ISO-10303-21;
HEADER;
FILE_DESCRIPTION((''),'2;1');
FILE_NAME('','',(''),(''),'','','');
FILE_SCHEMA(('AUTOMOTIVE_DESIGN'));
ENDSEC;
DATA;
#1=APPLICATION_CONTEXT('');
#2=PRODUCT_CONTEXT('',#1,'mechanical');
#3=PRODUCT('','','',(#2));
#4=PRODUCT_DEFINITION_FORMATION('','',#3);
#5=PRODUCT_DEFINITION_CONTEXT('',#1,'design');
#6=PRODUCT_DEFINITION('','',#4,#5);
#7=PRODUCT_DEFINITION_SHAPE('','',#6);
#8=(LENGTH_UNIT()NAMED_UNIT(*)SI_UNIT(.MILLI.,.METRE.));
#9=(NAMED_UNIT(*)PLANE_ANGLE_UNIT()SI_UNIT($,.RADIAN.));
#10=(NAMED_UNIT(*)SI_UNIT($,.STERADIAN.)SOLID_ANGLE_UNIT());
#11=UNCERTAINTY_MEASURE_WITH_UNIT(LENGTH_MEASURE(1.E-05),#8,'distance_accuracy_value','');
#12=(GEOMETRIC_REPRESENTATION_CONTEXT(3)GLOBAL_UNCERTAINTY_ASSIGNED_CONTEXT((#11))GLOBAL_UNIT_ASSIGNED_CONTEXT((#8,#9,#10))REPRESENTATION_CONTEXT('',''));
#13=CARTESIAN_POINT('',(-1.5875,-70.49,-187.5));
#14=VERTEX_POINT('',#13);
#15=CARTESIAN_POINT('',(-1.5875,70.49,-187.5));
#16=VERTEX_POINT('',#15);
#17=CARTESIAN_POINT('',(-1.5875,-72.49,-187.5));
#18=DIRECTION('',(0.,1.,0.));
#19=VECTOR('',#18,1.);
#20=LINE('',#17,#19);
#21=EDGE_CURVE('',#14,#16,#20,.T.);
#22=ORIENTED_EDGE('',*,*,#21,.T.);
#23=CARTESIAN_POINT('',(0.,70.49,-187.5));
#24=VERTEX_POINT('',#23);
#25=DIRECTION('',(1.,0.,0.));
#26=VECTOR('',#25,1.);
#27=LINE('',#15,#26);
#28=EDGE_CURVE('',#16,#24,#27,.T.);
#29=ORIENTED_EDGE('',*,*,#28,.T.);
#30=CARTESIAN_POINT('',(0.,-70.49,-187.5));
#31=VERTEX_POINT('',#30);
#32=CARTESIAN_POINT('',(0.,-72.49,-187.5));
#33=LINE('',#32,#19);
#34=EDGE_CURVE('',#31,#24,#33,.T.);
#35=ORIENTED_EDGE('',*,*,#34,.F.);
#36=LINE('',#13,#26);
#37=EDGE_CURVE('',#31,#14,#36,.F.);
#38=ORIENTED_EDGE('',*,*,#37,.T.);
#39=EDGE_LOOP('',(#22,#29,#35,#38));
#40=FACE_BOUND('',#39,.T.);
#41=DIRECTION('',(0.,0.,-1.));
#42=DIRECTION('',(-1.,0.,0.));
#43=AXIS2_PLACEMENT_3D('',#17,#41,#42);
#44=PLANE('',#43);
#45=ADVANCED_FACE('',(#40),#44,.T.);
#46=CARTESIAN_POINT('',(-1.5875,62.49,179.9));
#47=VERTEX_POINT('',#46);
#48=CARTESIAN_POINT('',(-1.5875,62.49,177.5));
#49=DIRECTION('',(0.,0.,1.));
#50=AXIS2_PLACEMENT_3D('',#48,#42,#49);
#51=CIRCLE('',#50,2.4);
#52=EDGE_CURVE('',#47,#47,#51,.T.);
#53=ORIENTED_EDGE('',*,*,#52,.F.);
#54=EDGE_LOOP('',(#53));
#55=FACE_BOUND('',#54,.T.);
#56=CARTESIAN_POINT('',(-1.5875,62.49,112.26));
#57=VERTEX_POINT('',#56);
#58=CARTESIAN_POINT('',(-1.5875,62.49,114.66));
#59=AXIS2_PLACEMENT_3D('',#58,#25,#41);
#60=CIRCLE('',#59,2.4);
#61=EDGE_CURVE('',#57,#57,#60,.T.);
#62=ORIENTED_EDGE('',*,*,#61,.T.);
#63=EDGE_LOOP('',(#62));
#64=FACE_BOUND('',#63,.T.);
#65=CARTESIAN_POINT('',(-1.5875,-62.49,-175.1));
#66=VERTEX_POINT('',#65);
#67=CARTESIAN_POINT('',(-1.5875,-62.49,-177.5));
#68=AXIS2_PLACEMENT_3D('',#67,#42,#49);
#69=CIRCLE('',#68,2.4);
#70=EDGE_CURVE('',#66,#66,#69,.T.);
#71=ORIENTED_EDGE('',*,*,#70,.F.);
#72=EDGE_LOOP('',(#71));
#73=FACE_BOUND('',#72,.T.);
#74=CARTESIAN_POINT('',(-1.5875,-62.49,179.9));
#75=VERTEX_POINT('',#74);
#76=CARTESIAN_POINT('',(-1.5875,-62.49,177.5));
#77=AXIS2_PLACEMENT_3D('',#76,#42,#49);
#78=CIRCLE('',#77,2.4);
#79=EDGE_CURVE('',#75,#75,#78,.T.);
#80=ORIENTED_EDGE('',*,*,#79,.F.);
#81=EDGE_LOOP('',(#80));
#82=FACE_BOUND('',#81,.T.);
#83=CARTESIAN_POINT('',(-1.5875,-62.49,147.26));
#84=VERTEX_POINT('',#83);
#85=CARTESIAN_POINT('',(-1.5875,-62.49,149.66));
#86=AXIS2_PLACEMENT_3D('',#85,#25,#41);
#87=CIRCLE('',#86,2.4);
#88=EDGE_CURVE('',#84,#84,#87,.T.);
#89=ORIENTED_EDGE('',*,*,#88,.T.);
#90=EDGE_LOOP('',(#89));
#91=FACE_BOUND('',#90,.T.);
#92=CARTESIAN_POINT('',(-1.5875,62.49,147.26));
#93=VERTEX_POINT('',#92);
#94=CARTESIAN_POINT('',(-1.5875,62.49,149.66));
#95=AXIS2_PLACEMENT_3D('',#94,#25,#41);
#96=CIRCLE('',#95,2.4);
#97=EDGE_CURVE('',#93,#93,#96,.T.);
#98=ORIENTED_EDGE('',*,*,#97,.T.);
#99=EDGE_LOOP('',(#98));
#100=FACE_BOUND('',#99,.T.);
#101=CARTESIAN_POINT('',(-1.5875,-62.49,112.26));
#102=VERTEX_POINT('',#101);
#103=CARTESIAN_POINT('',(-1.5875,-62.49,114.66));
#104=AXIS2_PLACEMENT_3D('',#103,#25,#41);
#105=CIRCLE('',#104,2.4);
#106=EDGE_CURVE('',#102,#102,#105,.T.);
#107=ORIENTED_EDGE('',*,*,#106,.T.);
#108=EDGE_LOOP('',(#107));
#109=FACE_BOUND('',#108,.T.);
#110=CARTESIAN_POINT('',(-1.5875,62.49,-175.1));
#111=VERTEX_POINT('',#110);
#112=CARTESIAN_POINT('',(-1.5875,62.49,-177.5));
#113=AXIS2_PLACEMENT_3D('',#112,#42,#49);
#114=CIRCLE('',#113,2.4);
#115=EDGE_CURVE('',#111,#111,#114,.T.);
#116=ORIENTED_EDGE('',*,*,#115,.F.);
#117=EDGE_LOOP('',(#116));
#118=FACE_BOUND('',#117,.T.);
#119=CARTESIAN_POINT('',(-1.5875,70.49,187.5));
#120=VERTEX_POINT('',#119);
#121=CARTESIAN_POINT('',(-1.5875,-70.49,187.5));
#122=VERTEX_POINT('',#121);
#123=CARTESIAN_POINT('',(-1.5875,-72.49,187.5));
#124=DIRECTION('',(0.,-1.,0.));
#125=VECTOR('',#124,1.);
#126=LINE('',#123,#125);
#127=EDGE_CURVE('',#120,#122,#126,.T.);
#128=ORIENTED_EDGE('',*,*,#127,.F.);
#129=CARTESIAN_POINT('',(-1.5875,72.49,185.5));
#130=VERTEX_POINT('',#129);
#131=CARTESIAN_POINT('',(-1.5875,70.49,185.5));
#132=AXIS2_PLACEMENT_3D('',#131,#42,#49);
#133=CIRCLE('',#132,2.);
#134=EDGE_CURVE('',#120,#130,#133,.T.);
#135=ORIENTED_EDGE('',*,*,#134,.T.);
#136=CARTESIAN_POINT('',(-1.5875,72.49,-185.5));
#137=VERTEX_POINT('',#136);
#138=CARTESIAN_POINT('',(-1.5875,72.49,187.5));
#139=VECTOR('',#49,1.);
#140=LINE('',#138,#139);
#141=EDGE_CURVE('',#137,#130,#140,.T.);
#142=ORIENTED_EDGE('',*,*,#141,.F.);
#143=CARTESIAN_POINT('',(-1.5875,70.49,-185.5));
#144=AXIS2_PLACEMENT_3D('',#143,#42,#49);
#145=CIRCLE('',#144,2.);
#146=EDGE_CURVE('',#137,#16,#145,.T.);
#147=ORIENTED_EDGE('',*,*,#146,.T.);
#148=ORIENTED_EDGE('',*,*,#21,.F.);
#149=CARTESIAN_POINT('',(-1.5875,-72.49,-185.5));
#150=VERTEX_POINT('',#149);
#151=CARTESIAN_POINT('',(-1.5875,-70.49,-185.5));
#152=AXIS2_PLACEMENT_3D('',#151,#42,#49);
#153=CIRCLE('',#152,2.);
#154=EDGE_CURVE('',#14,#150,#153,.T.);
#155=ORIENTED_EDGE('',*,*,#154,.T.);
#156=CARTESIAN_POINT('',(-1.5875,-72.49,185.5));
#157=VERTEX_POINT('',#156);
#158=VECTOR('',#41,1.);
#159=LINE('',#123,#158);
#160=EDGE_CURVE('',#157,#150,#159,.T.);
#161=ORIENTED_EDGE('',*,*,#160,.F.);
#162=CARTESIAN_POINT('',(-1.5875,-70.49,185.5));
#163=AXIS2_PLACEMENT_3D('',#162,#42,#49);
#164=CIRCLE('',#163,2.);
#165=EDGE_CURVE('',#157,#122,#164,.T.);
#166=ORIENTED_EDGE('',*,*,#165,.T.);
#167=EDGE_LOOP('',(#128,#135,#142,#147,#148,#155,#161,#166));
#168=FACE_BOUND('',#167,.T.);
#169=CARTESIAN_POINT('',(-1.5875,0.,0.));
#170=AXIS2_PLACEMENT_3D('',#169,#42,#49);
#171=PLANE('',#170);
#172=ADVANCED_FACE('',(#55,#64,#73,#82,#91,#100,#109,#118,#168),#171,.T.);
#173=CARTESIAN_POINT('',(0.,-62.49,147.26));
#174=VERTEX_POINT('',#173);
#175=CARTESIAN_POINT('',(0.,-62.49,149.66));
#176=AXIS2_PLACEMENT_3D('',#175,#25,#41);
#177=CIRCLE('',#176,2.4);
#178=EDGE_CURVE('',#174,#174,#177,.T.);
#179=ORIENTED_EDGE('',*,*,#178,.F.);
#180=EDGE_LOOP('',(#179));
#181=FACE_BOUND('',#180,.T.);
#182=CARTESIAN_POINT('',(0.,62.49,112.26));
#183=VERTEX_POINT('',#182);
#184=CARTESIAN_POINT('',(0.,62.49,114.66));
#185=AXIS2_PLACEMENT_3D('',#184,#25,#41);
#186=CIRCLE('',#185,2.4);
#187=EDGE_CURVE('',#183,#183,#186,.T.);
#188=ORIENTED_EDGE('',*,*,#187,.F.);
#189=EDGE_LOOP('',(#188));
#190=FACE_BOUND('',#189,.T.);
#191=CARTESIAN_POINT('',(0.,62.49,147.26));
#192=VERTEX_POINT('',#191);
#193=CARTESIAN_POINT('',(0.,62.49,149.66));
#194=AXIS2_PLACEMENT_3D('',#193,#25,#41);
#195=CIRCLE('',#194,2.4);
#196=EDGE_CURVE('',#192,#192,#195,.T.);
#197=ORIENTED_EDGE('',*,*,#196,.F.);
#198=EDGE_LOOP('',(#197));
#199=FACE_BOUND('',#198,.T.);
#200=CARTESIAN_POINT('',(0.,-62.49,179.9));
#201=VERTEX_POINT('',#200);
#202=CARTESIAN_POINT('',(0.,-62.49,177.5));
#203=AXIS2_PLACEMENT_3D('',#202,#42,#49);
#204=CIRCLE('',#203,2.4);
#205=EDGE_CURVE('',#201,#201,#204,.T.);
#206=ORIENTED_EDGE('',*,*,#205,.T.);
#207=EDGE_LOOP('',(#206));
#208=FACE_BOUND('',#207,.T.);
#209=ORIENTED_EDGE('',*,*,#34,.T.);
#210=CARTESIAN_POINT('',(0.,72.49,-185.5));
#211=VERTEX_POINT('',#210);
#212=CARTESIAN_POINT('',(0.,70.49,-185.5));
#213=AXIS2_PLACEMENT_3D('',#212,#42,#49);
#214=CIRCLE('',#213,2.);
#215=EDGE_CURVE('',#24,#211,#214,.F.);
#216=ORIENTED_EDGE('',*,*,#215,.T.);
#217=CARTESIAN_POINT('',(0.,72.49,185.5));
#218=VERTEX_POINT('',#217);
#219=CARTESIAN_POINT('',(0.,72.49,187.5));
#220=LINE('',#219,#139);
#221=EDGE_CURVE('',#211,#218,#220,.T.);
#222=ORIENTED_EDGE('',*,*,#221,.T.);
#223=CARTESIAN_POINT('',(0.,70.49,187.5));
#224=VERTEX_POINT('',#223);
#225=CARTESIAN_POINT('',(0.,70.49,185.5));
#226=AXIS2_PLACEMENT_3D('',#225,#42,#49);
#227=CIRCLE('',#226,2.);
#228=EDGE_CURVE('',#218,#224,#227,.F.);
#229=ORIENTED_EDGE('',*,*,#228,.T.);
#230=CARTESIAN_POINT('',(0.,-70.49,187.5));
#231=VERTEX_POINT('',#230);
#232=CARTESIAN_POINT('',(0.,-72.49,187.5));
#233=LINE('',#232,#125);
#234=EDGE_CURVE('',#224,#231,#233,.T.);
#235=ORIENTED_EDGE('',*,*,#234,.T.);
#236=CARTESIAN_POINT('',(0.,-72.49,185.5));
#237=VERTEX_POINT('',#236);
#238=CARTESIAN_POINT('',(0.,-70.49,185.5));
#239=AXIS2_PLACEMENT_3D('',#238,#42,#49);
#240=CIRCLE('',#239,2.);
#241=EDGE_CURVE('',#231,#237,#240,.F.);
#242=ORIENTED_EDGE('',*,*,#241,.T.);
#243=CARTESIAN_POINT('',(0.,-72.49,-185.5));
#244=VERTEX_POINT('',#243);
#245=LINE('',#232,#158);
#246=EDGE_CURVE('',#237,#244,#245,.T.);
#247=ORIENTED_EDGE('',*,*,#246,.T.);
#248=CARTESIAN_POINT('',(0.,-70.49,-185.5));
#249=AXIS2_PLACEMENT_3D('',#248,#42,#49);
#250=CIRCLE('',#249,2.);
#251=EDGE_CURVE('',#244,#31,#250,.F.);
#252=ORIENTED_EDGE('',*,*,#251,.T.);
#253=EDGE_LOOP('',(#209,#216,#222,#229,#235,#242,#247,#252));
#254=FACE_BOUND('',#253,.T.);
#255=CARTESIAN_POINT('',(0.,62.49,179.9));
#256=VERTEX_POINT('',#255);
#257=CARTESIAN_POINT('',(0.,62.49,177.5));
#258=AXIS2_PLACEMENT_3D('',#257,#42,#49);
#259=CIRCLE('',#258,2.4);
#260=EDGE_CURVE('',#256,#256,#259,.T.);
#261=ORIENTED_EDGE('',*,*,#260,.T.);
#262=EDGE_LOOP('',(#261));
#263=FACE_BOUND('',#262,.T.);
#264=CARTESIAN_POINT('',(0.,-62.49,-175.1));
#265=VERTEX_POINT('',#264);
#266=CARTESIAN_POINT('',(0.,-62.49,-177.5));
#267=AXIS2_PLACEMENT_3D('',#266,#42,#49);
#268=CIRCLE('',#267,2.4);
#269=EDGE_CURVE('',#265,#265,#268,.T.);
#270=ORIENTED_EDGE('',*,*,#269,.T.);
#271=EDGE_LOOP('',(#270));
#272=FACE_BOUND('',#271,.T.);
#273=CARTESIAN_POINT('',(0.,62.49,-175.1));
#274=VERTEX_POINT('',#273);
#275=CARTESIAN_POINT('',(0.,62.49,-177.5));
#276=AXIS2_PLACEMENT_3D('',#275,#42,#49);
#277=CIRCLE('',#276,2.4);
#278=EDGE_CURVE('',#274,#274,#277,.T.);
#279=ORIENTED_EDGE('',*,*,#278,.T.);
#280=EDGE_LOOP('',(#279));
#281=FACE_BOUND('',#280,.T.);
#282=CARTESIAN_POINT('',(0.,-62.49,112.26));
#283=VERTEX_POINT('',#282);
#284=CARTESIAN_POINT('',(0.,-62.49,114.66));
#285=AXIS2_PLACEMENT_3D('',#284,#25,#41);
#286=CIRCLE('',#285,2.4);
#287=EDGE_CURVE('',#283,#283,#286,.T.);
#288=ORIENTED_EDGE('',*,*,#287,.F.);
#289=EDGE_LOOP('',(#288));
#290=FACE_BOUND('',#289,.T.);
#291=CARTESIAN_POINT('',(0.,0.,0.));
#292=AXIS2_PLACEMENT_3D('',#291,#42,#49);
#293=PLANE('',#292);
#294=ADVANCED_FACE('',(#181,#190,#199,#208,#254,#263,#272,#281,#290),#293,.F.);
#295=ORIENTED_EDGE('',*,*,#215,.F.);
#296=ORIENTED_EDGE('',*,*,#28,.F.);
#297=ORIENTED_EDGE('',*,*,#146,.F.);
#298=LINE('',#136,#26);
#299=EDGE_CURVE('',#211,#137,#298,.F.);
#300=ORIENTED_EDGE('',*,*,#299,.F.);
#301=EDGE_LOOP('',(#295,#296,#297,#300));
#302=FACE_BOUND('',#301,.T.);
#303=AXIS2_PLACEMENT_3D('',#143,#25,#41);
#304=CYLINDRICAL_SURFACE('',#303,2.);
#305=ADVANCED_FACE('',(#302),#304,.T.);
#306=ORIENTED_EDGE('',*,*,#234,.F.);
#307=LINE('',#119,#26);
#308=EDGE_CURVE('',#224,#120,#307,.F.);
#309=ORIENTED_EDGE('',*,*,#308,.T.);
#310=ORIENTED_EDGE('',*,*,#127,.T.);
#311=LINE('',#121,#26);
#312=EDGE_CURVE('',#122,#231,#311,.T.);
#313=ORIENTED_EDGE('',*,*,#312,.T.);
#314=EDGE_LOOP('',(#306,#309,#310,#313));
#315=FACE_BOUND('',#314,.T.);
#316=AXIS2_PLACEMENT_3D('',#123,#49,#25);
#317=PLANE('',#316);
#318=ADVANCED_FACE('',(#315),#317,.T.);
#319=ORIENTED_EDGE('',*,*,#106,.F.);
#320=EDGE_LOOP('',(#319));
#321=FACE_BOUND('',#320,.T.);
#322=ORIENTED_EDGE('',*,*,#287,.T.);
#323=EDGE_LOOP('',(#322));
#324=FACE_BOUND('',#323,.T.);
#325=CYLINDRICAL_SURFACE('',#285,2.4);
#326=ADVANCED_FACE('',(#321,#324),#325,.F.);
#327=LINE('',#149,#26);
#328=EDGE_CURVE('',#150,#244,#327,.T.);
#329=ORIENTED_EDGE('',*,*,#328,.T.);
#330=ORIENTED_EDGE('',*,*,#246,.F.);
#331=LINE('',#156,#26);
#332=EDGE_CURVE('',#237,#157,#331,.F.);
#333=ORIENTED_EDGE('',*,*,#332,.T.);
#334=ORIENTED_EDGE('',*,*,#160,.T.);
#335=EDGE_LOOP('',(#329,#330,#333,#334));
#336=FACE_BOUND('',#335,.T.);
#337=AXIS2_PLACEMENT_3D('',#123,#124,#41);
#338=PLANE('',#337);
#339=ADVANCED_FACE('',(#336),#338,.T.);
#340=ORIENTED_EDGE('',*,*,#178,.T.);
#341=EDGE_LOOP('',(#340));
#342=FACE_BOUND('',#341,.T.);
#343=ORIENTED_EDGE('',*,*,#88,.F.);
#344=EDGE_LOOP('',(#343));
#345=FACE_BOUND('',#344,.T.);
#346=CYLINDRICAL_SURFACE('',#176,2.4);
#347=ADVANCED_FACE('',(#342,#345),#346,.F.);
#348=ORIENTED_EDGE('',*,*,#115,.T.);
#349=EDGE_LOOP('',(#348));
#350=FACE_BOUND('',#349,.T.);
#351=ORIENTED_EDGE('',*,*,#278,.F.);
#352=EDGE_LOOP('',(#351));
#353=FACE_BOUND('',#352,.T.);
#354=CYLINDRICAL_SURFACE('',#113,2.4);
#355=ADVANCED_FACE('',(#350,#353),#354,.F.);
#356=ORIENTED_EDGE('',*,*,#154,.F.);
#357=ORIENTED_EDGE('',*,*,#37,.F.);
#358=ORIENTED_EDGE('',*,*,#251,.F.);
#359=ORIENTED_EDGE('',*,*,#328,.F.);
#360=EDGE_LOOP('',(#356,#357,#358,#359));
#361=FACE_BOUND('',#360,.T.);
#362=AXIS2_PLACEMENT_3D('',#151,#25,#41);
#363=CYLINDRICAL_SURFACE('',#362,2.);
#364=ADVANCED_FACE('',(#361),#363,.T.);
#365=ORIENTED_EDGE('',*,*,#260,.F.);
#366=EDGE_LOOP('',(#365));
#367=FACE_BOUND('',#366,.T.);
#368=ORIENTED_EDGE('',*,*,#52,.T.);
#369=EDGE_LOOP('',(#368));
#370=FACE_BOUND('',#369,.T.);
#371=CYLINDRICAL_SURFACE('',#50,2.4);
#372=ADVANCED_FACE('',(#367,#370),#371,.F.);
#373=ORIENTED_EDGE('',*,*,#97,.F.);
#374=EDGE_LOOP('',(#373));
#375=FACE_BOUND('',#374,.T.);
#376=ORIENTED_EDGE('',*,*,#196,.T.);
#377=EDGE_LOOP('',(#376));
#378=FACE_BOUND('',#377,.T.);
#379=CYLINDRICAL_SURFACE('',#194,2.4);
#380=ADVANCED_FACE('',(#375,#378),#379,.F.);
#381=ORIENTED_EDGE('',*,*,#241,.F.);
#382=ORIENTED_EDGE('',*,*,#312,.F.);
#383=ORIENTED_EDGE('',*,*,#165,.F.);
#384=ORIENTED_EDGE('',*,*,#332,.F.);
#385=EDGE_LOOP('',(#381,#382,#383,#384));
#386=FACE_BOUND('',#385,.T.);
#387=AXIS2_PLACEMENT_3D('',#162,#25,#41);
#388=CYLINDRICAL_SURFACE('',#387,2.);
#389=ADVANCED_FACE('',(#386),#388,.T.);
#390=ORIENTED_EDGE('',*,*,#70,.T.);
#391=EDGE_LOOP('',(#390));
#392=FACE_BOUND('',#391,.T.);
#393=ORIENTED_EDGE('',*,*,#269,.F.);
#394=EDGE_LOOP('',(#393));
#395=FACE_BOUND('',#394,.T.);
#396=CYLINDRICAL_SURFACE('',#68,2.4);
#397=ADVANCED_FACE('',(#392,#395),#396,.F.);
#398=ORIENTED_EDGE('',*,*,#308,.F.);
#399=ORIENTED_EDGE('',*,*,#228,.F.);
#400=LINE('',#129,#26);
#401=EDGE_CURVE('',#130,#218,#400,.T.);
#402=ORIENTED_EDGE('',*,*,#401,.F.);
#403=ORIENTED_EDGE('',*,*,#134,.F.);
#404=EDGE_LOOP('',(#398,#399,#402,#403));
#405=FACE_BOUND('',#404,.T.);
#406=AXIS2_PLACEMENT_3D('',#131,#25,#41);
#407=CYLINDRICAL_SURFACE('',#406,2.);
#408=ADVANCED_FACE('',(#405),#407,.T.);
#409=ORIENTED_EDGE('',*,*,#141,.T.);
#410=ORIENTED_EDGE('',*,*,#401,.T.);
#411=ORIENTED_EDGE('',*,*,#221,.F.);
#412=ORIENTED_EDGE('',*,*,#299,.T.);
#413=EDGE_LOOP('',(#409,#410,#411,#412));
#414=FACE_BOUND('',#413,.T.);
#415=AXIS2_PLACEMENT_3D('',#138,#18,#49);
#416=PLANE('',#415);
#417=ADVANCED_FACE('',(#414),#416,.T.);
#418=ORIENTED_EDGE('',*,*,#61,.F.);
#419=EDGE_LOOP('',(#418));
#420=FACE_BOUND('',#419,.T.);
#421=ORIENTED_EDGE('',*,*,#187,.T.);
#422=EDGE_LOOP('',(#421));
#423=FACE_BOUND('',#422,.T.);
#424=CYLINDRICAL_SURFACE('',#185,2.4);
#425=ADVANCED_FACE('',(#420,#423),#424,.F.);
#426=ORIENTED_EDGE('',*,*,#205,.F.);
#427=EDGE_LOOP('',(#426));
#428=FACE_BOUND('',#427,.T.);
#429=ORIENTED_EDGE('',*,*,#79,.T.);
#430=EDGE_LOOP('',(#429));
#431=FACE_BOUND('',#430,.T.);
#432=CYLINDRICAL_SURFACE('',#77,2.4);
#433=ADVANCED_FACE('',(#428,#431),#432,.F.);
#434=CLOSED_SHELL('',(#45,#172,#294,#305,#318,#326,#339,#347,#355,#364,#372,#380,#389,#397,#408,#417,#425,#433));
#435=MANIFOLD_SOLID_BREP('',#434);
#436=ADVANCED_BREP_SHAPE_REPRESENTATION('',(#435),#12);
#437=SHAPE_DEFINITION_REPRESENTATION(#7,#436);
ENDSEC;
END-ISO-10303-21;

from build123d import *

# Parameters (mm, degrees)
SKETCH1_W            = 375
SKETCH1_H            = 144.98
BASE_FLANGE1_DEPTH   = 1.5875
M4_CLEARANCE_HOLE1_D = 4.8
MIRROR2_COPY_1_D     = 4.8
M4_CLEARANCE_HOLE2_D = 4.8
FILLET1_R            = 2
FILLET2_R            = 2
FILLET3_R            = 2
FILLET4_R            = 2


# Sheet-metal steps are written as plain solids
with BuildPart() as part:
    # Sketch1 → Base-Flange1 (new body)
    with BuildSketch(Plane(origin=(0, 0, 0), x_dir=(0, 0, -1), z_dir=(1, 0, 0))):
        Rectangle(SKETCH1_W, SKETCH1_H)
    extrude(amount=-BASE_FLANGE1_DEPTH)

    # M4 Clearance Hole1 (through all)
    with Locations(Plane.ZY.offset(1.5875)):
        with Locations((177.5, 62.49)):
            m4_clearance_hole1 = Hole(M4_CLEARANCE_HOLE1_D / 2)

    # Mirror1: M4 Clearance Hole1 across plane
    add(m4_clearance_hole1.mirror(Plane.XY), mode=Mode.SUBTRACT)

    # Mirror2: M4 Clearance Hole1 across plane
    add(m4_clearance_hole1.mirror(Plane.ZX), mode=Mode.SUBTRACT)

    # Mirror2 copy 1 (through all)
    with Locations(Plane(origin=(-1.5875, 0, 0), x_dir=(0, 0, -1), z_dir=(-1, 0, 0))):
        with Locations((177.5, 62.49)):
            Hole(MIRROR2_COPY_1_D / 2)

    # M4 Clearance Hole2 (through all)
    with Locations(Plane(origin=(0, 62.49, 149.66), x_dir=(0, 0, 1), z_dir=(1, 0, 0))):
        with Locations((0, 0), (-35, 0)):
            m4_clearance_hole2 = Hole(M4_CLEARANCE_HOLE2_D / 2)

    # Mirror3: M4 Clearance Hole2 across plane
    add(m4_clearance_hole2.mirror(Plane.ZX), mode=Mode.SUBTRACT)

    # Fillet1
    fillet1_edges = [part.edges().sort_by_distance(p)[0] for p in [
        (-0.79375, 72.49, 187.5),
    ]]
    fillet(fillet1_edges, radius=FILLET1_R)

    # Fillet2
    fillet2_edges = [part.edges().sort_by_distance(p)[0] for p in [
        (-0.79375, -72.49, 187.5),
    ]]
    fillet(fillet2_edges, radius=FILLET2_R)

    # Fillet3
    fillet3_edges = [part.edges().sort_by_distance(p)[0] for p in [
        (-0.79375, 72.49, -187.5),
    ]]
    fillet(fillet3_edges, radius=FILLET3_R)

    # Fillet4
    fillet4_edges = [part.edges().sort_by_distance(p)[0] for p in [
        (-0.79375, -72.49, -187.5),
    ]]
    fillet(fillet4_edges, radius=FILLET4_R)


solid = part.part
